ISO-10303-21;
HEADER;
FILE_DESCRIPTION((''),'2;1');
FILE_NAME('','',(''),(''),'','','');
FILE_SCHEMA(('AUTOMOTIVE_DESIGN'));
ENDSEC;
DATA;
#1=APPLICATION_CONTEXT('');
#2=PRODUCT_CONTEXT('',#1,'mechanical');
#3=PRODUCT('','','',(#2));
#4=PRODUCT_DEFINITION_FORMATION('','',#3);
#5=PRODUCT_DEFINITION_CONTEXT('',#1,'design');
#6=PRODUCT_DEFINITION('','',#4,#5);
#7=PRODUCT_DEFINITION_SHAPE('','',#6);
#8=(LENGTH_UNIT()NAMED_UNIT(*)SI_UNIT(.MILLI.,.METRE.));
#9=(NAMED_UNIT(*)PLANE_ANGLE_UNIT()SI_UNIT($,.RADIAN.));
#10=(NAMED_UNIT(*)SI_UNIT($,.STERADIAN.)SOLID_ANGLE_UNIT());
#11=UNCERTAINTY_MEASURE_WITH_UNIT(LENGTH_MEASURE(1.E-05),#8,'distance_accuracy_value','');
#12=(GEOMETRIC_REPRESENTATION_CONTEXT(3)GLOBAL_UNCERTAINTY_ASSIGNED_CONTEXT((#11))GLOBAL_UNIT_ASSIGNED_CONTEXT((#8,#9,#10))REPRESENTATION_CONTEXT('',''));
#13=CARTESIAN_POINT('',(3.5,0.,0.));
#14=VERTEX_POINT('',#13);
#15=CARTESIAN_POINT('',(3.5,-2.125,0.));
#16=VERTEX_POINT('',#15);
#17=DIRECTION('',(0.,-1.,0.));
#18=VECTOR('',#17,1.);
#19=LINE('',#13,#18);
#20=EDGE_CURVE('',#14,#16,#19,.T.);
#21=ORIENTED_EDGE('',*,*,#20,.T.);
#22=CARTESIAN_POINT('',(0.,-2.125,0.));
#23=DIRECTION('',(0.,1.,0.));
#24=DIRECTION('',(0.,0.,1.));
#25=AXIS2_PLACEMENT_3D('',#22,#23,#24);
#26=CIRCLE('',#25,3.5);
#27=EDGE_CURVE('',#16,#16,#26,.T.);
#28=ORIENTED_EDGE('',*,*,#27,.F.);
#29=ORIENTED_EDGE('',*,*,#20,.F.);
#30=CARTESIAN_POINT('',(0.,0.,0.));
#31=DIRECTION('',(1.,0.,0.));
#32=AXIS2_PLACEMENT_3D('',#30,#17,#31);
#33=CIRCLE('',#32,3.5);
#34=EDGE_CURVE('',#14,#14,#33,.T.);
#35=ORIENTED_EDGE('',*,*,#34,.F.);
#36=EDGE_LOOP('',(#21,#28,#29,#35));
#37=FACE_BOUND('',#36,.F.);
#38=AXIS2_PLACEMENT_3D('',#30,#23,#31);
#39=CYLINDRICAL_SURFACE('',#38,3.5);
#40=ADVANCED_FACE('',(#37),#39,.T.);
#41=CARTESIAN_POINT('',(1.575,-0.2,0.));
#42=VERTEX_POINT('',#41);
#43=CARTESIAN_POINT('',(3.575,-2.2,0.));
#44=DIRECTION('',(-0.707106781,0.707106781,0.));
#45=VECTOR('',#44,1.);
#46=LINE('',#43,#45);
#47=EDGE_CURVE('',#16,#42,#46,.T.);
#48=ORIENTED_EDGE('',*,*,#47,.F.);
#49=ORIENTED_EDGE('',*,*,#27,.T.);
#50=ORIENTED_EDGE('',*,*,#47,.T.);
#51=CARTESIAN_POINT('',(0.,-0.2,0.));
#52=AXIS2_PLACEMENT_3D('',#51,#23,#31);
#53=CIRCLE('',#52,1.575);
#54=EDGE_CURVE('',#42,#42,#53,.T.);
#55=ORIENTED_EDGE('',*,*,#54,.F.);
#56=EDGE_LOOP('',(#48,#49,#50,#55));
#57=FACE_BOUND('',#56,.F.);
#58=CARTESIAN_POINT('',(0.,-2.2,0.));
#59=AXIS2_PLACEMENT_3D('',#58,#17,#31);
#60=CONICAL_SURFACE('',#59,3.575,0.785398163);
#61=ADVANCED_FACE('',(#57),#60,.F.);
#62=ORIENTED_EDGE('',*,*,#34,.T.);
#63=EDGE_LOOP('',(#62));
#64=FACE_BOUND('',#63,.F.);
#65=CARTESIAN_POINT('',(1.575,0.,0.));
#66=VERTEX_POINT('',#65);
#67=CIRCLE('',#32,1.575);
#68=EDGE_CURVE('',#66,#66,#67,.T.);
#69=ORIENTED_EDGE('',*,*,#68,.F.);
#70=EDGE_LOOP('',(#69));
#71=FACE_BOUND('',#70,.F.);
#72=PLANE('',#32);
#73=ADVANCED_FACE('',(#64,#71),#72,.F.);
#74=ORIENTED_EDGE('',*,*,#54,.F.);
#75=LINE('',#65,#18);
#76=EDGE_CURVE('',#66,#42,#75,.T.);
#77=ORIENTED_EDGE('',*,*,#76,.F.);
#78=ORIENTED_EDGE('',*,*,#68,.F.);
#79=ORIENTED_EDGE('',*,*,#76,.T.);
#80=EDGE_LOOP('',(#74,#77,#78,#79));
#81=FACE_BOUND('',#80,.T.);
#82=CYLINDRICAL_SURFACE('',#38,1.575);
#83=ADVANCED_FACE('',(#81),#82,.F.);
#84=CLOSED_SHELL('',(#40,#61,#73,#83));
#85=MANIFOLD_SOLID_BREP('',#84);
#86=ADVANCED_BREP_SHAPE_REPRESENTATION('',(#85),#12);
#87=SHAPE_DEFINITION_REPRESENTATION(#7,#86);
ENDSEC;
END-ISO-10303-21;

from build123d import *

# Parameters (mm, degrees)
F0_R     = 3.5
F0_R_2   = 1.575
F1_DEPTH = 2.2
F2_DEPTH = 4


# Not quite as in the source:
# - a fillet or chamfer that OpenCascade refuses, or shapes differently, is made with other operations: its cross-section is extruded or revolved along the edge and cut away or added


with BuildPart() as f1:
    # F0 (on Front) → F1 (new body)
    with BuildSketch(Plane.XZ):
        Circle(F0_R)
        Circle(F0_R_2, mode=Mode.SUBTRACT)
        Circle(F0_R_2)
    extrude(amount=F1_DEPTH)

    # F0 (on Front) → F2 (cut)
    with BuildSketch(Plane.XZ):
        Circle(F0_R_2)
    extrude(amount=F2_DEPTH, mode=Mode.SUBTRACT)

    # F3: chamfer of 2 on 1 edges, made by hand

    # F3_s1 → F3_t2 (revolve, cut)
    with BuildSketch(Plane.XY):
        Polygon((3.575, -2.2), (1.575, -0.2), (1.575, -2.2), align=None)
    revolve(axis=Axis((0, -2.2, 0), (0, 1, 0)), mode=Mode.SUBTRACT)


solid = f1.part
